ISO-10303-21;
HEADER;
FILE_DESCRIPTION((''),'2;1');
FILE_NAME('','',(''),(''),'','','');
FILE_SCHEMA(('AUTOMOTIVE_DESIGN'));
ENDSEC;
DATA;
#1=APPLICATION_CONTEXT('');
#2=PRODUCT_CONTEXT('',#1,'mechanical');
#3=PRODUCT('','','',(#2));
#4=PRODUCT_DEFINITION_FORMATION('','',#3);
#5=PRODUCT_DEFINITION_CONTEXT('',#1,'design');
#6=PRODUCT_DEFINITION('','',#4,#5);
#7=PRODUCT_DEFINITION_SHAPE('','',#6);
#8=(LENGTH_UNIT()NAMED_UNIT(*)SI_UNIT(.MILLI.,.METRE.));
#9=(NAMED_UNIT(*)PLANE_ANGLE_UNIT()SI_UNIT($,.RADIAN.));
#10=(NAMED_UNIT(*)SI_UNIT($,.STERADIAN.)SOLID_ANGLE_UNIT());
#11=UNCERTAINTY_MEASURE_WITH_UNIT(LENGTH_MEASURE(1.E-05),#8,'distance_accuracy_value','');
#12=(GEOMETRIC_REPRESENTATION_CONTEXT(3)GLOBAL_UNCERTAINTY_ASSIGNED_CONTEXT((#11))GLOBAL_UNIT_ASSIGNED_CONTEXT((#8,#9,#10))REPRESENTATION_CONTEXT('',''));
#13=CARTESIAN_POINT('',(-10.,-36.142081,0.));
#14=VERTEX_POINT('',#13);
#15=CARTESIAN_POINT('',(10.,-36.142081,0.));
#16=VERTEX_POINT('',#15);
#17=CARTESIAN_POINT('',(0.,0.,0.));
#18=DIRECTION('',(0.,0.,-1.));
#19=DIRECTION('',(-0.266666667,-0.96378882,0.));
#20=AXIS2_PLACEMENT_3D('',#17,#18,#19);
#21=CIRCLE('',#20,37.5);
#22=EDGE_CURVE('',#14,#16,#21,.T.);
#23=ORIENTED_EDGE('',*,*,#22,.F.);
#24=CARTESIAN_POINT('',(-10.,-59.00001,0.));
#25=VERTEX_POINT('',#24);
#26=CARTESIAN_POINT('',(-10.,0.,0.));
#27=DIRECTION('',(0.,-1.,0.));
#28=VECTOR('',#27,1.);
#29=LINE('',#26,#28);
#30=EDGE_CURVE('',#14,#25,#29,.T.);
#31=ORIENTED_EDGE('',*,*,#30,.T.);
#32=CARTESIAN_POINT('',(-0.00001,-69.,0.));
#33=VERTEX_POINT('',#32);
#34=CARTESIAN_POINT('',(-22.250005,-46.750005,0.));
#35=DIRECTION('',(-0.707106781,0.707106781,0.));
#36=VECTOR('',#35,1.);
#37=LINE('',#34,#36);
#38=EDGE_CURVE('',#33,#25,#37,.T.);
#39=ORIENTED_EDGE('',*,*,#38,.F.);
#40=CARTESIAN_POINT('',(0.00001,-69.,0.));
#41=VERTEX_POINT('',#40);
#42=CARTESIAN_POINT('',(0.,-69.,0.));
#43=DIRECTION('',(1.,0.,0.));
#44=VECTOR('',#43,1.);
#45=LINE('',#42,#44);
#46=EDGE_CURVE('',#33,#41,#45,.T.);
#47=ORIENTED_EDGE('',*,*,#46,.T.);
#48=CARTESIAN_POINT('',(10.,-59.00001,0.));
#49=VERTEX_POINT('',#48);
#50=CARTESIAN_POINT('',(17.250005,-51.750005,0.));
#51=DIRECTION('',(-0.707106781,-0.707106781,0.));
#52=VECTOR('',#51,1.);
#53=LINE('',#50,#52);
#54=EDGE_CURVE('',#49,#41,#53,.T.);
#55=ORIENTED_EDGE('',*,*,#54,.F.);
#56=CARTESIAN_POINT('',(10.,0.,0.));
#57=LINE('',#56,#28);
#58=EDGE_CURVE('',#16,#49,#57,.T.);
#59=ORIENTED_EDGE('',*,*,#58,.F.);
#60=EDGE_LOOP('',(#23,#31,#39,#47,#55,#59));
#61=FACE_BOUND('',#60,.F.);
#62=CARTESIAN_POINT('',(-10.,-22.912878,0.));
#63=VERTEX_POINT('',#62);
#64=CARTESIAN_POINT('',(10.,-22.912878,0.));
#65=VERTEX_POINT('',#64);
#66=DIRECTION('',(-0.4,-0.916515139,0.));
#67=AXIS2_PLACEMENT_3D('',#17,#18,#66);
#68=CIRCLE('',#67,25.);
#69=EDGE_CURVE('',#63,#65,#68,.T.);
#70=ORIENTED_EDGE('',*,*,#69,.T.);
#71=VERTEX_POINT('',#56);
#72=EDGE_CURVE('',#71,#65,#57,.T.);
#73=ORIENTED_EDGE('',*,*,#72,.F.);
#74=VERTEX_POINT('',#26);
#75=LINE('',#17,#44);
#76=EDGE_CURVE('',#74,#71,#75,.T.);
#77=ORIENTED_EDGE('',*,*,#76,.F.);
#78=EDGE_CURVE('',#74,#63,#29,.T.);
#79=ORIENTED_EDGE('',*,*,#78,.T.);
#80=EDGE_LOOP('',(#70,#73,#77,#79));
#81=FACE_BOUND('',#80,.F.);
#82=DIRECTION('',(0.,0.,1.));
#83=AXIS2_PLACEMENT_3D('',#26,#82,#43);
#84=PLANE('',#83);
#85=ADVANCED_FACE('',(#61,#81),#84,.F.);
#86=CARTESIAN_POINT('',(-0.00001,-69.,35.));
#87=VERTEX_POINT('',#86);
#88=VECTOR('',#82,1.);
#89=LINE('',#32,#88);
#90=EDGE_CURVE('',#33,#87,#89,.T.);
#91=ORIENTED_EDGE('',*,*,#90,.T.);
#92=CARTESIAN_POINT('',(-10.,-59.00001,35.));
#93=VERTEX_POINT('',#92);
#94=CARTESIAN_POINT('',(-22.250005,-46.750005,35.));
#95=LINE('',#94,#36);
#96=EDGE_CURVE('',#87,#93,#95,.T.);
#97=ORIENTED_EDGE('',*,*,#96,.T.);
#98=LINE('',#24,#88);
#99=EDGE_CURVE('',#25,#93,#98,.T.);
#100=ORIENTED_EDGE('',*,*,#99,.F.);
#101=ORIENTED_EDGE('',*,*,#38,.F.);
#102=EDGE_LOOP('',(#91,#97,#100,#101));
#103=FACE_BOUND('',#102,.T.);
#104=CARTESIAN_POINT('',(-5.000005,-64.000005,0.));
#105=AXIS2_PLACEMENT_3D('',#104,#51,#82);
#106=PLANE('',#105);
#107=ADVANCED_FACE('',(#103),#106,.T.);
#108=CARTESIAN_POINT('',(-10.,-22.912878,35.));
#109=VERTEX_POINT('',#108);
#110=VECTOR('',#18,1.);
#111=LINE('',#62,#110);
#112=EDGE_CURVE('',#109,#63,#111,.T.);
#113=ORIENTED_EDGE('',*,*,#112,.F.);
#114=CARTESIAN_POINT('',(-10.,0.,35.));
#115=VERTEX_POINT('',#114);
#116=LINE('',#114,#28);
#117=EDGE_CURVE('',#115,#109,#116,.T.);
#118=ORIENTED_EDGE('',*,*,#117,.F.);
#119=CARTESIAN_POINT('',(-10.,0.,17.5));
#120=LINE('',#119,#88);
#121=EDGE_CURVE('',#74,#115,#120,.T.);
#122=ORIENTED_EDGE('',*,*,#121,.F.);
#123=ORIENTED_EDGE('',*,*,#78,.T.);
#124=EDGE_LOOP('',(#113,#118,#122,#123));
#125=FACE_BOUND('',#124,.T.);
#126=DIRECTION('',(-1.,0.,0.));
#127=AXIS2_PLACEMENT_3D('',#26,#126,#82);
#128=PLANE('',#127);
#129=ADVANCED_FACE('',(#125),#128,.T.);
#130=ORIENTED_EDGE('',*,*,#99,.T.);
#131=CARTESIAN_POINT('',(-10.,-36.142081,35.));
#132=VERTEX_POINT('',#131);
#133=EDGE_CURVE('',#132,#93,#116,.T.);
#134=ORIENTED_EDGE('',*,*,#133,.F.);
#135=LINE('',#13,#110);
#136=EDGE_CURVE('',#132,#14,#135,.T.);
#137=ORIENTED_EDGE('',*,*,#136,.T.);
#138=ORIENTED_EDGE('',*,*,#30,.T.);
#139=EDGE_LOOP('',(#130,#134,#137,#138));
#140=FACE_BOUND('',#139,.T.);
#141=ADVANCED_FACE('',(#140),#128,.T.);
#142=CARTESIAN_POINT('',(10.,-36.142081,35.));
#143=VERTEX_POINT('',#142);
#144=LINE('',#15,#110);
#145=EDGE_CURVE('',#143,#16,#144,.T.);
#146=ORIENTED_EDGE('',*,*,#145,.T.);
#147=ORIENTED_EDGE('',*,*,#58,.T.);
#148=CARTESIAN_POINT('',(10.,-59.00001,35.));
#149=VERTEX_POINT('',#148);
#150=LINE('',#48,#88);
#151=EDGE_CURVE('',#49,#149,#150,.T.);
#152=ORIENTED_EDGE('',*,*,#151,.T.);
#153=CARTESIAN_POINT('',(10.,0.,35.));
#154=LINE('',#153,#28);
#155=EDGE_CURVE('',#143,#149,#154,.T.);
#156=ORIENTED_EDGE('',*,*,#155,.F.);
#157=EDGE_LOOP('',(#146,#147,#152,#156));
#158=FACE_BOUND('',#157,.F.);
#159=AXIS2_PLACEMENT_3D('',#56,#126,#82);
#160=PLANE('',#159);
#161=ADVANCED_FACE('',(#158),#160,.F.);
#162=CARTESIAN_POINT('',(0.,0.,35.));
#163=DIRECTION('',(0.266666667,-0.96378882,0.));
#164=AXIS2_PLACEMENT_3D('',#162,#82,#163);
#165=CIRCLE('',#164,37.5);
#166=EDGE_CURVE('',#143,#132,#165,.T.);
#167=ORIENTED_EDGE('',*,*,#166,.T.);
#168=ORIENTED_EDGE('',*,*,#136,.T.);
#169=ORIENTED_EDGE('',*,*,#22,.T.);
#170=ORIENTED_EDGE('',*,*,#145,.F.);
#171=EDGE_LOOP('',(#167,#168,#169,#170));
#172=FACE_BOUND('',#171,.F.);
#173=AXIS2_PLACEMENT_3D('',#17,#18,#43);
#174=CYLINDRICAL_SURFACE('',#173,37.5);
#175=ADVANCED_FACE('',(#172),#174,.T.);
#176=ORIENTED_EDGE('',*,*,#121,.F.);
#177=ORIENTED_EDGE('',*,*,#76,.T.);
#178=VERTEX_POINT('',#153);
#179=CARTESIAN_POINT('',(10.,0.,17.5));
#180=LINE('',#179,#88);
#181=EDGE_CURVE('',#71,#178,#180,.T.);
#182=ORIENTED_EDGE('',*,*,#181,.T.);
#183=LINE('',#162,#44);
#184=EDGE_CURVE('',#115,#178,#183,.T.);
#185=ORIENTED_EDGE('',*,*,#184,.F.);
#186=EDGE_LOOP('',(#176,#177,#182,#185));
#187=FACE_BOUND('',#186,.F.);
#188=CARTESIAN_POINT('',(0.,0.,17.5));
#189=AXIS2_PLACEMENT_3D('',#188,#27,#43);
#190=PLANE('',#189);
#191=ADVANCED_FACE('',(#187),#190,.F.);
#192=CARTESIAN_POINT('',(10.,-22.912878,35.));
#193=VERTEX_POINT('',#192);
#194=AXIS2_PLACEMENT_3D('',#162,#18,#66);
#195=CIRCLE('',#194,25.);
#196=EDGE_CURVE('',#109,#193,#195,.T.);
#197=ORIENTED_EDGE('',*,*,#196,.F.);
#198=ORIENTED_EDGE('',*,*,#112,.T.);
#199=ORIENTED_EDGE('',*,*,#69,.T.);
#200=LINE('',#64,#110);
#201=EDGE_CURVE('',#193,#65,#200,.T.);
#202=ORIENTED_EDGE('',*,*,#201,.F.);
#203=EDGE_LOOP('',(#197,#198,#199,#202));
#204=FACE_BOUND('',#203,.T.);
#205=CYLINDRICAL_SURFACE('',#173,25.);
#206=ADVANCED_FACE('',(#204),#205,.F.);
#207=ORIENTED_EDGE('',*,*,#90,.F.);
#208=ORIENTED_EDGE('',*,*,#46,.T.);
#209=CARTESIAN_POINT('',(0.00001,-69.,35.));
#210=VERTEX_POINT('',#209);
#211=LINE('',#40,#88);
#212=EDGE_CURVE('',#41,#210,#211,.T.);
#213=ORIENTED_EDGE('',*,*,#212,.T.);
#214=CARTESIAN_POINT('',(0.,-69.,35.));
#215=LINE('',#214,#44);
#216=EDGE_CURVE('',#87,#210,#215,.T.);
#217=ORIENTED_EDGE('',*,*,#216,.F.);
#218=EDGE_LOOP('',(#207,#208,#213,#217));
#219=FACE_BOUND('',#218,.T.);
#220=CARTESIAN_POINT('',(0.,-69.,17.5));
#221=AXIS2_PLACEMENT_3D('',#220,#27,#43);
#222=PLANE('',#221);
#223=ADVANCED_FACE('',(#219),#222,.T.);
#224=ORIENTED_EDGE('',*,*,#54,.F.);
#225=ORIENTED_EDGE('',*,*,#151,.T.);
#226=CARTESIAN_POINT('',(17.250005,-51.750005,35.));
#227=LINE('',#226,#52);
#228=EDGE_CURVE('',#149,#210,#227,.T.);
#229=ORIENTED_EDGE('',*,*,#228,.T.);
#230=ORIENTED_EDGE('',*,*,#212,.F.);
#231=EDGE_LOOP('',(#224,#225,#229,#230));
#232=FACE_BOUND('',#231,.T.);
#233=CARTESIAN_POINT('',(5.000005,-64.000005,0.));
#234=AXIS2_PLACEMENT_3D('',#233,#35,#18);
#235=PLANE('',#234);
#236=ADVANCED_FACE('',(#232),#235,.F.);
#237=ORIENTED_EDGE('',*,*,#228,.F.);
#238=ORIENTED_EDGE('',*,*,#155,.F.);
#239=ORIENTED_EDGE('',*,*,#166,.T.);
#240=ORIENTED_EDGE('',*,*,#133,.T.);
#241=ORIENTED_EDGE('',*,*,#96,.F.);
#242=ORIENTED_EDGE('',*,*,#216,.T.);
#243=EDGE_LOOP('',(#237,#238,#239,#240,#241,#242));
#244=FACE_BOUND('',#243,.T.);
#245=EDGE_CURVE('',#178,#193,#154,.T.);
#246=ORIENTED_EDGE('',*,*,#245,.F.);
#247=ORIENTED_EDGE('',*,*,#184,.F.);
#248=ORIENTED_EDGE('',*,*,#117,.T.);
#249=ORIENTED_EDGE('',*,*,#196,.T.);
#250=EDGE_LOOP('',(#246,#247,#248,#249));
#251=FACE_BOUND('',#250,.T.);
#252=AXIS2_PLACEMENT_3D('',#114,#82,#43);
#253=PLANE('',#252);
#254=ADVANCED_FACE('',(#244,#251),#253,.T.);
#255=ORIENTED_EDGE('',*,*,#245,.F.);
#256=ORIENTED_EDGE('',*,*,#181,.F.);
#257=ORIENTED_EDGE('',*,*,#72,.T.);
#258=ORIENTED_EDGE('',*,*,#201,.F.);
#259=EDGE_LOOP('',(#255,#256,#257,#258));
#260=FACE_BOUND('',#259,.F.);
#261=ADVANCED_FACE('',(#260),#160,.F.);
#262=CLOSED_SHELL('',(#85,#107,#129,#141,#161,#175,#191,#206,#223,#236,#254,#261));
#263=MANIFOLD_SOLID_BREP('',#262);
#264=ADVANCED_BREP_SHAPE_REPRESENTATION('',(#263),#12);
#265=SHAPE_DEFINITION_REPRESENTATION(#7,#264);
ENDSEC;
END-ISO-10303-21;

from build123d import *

# Parameters (mm, degrees)
F0_R     = 37.5
F0_R_2   = 25
F1_DEPTH = 35
F2_W     = 20
F2_H     = 35
F3_DEPTH = 69
F4_SIZE  = 9.99999


# Not quite as in the source:
# - a fillet or chamfer is up to 0.001 mm smaller than in the source, because OpenCascade refuses the exact size


with BuildPart() as f1:
    # F0 (on Top) → F1 (new body)
    with BuildSketch(Plane.XY):
        Circle(F0_R)
        Circle(F0_R_2, mode=Mode.SUBTRACT)
    extrude(amount=F1_DEPTH)

    # F2 (on Front) → F3 (join)
    with BuildSketch(Plane.XZ):
        with Locations((0, 17.5)):
            Rectangle(F2_W, F2_H)
    extrude(amount=F3_DEPTH)

    # F4 (size 10 in the source; OpenCascade refuses exactly that, so slightly less here)
    f4_edges = [f1.edges().sort_by_distance(p)[0] for p in [
        (-10, -69, 17.5),
        (10, -69, 17.5),
    ]]
    chamfer(f4_edges, length=F4_SIZE)


solid = f1.part
